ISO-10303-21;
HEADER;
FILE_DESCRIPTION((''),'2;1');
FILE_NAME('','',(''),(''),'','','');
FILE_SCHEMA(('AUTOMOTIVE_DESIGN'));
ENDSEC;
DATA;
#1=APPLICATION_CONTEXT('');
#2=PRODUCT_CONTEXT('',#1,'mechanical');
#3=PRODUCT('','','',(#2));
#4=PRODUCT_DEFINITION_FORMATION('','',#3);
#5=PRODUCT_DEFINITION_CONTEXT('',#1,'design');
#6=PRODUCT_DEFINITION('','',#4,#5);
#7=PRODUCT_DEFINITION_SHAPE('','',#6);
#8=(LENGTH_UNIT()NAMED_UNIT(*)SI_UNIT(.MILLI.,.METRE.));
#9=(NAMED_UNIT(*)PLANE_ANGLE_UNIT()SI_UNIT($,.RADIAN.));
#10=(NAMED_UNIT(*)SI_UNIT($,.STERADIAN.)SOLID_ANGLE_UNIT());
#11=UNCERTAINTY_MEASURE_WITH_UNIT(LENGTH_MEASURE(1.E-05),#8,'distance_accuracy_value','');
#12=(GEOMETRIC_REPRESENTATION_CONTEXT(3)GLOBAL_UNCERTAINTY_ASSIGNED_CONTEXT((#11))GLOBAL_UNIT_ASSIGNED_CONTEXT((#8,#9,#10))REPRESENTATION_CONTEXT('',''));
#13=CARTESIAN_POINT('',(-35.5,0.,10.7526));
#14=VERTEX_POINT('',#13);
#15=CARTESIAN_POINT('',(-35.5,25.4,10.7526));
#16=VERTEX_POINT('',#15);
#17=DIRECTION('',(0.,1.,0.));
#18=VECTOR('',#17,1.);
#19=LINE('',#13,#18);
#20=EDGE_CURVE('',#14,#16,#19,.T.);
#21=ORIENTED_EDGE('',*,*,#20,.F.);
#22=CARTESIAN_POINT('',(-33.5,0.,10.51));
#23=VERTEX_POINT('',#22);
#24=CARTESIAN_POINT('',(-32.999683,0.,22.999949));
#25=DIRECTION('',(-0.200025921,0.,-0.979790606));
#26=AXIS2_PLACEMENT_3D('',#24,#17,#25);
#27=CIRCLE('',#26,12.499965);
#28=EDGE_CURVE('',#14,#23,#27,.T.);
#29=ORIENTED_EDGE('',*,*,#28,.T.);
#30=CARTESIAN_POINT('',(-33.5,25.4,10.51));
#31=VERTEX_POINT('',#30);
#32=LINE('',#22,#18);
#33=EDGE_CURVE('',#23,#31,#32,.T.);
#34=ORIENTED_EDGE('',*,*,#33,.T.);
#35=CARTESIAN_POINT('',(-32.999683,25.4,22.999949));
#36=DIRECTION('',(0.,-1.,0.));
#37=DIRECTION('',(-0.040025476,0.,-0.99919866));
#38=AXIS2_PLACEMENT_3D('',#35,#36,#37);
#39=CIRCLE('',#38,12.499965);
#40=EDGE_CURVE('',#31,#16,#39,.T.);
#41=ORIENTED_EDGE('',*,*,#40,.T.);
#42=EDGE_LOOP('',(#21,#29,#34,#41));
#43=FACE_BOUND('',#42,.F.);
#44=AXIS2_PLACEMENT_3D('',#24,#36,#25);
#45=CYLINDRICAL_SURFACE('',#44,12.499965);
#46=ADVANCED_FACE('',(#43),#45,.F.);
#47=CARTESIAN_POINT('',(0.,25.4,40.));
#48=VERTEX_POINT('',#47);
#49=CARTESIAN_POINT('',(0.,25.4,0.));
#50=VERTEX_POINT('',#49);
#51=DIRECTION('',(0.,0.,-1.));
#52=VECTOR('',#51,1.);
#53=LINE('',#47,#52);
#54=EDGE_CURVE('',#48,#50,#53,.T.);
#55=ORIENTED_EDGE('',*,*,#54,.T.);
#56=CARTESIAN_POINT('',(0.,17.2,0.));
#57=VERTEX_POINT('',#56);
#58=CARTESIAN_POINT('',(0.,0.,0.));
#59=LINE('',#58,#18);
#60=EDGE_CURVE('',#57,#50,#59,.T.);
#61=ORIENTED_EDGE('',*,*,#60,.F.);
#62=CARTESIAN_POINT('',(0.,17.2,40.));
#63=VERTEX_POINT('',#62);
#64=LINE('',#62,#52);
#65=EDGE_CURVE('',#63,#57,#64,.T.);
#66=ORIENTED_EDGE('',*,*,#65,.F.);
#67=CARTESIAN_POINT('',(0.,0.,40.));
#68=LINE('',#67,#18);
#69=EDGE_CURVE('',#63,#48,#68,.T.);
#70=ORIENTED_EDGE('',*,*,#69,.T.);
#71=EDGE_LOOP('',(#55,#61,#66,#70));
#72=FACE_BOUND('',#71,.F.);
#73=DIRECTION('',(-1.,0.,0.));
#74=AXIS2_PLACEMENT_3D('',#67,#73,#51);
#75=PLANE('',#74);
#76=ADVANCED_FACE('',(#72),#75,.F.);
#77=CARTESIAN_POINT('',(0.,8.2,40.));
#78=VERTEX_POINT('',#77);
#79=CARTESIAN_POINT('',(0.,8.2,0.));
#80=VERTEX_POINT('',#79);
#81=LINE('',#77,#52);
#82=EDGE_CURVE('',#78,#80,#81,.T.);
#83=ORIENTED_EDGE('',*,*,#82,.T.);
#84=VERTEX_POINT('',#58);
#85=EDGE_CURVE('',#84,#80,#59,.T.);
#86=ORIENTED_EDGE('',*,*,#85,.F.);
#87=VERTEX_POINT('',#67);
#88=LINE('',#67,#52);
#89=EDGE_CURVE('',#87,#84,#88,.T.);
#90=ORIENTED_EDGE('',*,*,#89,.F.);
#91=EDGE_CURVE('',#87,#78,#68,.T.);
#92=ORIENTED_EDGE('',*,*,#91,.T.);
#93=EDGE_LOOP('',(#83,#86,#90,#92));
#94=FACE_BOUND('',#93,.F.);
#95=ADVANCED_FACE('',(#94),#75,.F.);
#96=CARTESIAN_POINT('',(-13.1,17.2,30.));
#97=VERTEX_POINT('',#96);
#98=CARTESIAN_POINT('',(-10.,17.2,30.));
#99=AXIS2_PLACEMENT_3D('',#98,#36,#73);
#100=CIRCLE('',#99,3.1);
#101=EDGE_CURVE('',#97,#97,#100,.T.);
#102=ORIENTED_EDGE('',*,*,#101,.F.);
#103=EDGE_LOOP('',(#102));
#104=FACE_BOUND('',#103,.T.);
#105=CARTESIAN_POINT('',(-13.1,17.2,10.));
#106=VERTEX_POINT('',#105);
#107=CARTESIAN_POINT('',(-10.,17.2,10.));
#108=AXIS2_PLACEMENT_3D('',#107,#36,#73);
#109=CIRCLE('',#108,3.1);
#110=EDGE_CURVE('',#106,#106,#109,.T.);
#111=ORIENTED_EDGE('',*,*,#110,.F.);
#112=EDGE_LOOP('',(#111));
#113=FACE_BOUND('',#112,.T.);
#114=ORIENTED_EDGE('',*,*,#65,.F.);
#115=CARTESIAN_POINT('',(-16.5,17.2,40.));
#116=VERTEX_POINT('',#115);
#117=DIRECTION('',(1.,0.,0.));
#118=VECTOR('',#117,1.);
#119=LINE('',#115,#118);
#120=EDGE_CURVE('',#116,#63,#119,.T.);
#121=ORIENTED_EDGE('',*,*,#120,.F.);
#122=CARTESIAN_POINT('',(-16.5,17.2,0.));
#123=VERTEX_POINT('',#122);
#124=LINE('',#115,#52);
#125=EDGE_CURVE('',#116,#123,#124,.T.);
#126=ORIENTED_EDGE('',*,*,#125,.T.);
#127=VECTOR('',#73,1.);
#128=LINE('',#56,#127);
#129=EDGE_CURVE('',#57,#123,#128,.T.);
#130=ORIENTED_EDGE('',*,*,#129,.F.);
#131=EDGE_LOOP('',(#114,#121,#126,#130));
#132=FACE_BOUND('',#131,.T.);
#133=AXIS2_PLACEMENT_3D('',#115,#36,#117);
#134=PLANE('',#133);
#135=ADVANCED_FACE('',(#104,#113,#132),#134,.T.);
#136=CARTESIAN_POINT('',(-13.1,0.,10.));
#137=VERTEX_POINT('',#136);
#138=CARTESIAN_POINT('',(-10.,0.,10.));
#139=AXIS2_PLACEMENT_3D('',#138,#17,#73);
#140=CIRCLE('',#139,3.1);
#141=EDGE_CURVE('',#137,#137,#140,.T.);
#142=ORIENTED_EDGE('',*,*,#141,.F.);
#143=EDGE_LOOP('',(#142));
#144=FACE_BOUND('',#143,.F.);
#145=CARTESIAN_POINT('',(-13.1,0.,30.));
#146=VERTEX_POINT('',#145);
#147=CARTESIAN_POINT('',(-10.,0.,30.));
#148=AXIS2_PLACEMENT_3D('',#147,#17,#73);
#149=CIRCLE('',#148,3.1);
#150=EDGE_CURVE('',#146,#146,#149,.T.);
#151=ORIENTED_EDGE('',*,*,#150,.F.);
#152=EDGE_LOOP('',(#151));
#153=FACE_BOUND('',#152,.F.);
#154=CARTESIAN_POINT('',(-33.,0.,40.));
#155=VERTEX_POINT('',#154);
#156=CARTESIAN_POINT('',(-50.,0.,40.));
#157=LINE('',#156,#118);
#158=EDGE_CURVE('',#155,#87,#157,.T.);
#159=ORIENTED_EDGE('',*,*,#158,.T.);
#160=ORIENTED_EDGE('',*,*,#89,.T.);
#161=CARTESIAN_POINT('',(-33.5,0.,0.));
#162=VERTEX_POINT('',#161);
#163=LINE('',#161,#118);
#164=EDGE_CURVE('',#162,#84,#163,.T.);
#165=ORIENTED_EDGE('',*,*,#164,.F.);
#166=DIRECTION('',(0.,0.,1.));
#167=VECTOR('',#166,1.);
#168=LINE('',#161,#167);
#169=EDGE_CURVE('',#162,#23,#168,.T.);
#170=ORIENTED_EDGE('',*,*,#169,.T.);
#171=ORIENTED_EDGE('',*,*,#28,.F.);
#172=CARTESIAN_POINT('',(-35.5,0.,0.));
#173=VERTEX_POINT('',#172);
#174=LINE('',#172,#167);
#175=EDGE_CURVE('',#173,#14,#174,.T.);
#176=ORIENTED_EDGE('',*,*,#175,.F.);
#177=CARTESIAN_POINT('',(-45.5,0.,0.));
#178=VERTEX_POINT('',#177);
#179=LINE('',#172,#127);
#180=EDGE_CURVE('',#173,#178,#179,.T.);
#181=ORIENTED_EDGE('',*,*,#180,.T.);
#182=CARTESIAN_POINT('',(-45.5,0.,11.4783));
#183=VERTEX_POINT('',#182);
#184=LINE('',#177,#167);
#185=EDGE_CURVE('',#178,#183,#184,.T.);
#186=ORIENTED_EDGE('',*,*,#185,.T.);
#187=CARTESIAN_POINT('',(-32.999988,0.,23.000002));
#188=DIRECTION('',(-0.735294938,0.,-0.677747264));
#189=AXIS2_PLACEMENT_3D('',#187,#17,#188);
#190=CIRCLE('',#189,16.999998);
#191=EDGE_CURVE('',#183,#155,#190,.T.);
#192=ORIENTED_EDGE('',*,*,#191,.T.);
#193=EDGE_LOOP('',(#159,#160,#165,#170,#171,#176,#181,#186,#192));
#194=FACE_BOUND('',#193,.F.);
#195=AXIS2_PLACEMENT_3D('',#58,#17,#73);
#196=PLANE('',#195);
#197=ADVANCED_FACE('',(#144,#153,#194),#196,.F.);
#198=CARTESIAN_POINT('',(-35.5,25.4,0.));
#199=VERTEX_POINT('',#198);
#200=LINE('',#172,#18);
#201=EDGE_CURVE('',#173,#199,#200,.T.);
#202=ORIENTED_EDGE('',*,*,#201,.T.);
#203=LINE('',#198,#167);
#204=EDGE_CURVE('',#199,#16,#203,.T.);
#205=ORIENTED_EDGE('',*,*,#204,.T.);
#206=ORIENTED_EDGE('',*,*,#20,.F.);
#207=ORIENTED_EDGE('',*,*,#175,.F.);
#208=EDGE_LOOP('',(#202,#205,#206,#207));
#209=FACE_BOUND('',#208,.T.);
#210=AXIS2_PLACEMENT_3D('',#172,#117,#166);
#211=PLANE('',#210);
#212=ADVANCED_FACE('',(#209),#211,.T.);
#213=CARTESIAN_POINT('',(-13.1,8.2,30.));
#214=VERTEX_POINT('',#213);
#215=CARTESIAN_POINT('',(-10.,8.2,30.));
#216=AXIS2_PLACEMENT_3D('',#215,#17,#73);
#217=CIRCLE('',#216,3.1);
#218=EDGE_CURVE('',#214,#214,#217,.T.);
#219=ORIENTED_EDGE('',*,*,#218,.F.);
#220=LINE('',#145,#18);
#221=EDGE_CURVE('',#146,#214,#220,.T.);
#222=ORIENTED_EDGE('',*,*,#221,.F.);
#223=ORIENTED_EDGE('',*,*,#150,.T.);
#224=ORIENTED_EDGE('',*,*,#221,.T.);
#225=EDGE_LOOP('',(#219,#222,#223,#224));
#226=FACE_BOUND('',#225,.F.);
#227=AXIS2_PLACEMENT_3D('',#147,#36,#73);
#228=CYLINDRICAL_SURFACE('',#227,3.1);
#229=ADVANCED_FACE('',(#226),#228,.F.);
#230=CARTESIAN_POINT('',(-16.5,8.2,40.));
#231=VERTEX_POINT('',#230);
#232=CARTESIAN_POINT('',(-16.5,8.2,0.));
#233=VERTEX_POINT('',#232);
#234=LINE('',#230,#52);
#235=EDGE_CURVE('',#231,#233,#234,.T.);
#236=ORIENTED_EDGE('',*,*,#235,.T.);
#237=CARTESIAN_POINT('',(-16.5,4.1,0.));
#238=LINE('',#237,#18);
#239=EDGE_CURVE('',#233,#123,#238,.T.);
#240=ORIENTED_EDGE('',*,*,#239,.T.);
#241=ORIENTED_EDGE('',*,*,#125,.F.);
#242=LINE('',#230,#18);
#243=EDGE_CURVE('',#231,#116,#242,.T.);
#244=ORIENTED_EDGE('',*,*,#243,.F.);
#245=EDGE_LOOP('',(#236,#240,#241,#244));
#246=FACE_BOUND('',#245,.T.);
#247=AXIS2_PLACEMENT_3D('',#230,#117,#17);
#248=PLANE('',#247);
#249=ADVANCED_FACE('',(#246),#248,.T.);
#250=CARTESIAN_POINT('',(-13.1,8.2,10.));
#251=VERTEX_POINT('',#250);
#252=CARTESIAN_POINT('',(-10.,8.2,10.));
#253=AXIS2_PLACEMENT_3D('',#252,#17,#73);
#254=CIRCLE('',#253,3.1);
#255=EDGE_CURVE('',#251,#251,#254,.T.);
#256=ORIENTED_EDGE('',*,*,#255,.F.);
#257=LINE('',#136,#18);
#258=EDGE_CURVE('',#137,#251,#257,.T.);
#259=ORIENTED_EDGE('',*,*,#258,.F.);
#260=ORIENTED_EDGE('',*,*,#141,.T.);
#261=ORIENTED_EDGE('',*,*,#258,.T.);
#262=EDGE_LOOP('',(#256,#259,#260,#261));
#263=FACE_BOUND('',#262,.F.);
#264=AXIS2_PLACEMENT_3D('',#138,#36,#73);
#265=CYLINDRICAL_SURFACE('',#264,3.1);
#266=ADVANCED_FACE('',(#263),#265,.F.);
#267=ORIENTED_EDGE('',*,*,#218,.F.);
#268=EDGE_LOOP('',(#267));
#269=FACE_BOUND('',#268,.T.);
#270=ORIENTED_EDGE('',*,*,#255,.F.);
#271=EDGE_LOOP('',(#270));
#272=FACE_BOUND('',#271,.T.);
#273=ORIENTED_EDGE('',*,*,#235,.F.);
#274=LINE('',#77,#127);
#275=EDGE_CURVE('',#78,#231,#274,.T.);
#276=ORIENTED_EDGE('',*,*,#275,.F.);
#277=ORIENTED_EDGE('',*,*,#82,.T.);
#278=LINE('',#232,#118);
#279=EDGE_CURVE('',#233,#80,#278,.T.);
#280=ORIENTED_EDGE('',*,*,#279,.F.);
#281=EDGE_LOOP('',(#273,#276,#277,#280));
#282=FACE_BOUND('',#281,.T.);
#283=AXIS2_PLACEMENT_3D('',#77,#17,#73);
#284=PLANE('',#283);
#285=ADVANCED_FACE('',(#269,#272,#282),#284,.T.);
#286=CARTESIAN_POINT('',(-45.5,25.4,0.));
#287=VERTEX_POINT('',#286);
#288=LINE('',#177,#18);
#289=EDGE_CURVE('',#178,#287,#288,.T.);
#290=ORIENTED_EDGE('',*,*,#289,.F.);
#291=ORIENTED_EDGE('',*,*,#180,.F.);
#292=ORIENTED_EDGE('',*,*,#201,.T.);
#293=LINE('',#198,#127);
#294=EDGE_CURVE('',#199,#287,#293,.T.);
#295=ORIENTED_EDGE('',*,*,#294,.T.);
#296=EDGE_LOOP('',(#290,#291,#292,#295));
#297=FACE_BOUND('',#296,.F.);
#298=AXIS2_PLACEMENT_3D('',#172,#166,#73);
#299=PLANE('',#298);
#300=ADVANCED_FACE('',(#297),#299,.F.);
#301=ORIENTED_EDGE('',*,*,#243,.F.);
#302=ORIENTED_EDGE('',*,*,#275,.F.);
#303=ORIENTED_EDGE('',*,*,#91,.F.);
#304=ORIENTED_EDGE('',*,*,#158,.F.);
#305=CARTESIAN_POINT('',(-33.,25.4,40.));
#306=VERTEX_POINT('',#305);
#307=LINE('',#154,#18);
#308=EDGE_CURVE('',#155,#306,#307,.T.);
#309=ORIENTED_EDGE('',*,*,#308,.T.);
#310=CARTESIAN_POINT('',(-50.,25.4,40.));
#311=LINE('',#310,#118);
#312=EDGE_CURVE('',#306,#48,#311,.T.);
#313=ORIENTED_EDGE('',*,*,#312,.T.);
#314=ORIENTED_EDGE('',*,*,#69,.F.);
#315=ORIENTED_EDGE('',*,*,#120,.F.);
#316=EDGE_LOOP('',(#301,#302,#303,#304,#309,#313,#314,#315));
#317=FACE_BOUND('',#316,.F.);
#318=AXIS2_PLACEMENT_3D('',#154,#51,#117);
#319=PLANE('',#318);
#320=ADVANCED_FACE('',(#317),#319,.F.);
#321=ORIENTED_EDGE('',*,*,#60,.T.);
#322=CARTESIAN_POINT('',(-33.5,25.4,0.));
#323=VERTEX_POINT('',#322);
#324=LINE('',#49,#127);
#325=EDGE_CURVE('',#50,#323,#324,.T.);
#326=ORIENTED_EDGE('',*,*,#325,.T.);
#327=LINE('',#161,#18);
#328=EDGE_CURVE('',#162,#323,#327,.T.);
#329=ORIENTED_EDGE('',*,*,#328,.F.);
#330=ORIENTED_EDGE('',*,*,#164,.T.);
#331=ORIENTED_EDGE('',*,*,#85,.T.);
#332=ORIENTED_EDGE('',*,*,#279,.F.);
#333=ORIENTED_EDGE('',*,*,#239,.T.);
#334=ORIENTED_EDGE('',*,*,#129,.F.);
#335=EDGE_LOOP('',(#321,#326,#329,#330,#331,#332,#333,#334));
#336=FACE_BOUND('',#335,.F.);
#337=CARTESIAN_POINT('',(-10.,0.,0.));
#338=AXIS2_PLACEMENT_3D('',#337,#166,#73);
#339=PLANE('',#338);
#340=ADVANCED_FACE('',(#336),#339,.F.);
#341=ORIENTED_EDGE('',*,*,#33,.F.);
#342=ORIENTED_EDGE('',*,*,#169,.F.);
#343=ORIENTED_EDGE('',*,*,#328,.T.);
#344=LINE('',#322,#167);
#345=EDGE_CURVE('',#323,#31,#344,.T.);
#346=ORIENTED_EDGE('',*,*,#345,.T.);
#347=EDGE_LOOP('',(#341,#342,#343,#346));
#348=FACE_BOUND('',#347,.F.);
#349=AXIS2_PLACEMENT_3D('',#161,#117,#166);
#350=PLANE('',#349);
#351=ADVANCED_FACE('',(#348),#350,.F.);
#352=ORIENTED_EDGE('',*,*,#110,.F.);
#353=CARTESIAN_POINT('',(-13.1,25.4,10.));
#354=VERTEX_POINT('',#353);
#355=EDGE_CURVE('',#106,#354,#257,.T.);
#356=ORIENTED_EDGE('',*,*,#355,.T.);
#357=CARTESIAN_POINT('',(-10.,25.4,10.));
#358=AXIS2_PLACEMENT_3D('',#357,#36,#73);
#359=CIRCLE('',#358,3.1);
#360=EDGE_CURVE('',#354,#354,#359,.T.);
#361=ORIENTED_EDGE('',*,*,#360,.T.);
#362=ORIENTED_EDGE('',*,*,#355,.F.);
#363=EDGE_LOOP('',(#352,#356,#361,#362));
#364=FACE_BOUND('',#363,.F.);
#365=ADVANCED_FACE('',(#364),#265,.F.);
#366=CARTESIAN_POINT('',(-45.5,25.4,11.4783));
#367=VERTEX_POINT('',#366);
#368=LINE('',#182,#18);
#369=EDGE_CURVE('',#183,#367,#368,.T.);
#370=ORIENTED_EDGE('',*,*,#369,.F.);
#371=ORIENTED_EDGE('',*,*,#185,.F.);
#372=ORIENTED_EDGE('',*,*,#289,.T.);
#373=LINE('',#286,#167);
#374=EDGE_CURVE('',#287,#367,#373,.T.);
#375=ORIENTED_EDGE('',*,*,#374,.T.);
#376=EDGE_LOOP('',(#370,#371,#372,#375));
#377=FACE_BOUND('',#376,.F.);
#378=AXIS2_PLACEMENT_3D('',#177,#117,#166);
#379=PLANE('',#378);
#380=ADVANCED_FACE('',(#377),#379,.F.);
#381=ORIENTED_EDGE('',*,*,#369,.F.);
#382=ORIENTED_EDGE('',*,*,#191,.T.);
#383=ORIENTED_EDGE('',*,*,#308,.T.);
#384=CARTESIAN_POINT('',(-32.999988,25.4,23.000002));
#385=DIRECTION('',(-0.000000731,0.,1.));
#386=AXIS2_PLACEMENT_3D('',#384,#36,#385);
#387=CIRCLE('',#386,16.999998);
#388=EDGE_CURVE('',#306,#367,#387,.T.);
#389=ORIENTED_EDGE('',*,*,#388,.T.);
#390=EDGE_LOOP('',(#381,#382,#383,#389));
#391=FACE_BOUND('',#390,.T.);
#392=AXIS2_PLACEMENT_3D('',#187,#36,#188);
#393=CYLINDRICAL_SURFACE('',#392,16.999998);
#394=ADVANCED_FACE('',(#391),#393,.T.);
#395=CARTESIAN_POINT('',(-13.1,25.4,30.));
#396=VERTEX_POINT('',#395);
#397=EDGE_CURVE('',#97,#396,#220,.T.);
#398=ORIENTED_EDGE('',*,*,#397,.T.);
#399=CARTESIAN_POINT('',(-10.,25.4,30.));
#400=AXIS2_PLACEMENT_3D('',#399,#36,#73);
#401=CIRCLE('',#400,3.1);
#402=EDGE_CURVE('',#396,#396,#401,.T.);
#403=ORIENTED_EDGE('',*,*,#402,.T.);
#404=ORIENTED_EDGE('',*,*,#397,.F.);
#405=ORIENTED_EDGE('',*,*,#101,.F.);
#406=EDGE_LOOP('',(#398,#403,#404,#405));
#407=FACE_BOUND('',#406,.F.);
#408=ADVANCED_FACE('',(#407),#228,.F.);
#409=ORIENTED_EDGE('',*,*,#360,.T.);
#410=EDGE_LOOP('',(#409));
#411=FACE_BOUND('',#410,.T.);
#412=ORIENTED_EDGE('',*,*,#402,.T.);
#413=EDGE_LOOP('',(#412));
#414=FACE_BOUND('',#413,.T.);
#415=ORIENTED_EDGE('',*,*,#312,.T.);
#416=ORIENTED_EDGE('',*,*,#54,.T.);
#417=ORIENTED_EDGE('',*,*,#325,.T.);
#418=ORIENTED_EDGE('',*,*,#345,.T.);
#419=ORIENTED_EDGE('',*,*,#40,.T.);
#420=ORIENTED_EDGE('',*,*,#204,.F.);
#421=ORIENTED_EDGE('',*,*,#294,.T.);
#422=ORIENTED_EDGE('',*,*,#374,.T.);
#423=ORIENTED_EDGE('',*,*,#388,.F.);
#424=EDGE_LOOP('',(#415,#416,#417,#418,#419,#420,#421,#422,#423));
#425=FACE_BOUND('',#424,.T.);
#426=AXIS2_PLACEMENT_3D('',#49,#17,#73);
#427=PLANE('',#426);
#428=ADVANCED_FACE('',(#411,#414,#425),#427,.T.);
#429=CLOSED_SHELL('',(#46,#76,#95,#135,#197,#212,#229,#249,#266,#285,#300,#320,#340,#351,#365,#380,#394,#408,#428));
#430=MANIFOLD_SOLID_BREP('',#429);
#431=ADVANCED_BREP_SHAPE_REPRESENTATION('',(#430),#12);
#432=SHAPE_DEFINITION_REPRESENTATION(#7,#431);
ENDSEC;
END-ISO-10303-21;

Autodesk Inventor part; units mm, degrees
ref_plane "YZ Plane" through (0, 0, 0) normal (1, 0, 0) x (0, 1, 0)
ref_plane "XZ Plane" through (0, 0, 0) normal (0, 1, 0) x (-1, 0, 0)
ref_plane "XY Plane" through (0, 0, 0) normal (0, 0, 1) x (1, 0, 0)
sketch "Sketch1" plane through (0, 0, 0) normal (0, 1, 0) x (-1, 0, 0)
  line L0 (50, 0) -> (50, 40)
  line L1 (50, 40) -> (0, 40)
  line L2 (0, 40) -> (0, 0)
  line L3 (0, 0) -> (10, 0)
  line L4 (10, 0) -> (10, 10)
  line L5 (10, 10) -> (10, 30)
  circle A0 centre (10, 30) radius 3.1
  circle A1 centre (10, 10) radius 3.1
  line L6 (45.5, 0) -> (45.5, 11.4783)
  line L7 (0, 0) -> (33.5, 0)
  line L8 (35.5, 0) -> (35.5, 10.7526)
  line L9 (50, 40) -> (45.5, 40)
  line L10 (45.5, 40) -> (45.5, 35.5)
  line L11 (45.5, 35.5) -> (45.5, 34.5217)
  line L12 (45.5, 23) -> (33, 23)
  arc A2 (35.5, 10.7526) -> (33.5, 10.51) centre (33, 23) ccw
  arc A3 (45.5, 11.4783) -> (33, 40) centre (33, 23) ccw
  line L13 (0, 0) -> (33.5, 0)
  line L14 (35.5, 0) -> (45.5, 0)
  line L15 (33.5, 0) -> (33.5, 10.51)
  line L16 (0, 0) -> (33.5, 0)
  line L17 (35.5, 0) -> (45.5, 0)
  dimension "d0" = 50
  dimension "d1" = 40
  dimension "d2" = 10
  dimension "d3" = 10
  dimension "d4" = 20
  dimension "d5" = 6.2
  dimension "d6" = 6.2
  dimension "d7" = 45.5
  dimension "d8" = 35.5
  dimension "d9" = 4.5
  dimension "d10" = 4.5
  dimension "d11" = 12.5
  dimension "d12" = 12.5
  dimension "d13" = 2
extrude "Extrusion1" add sketch "Sketch1" along normal blind 25.4 contours A3 L6 L14 L8 A2 L15 L7 L3 L2 L1
sketch "Sketch2" plane through (-33, 0, 40) normal (0, 0, 1) x (1, 0, 0)
  line L0 (33, 0) -> (33, 8.2)
  line L1 (33, 0) -> (33, 25.4)
  line L2 (33, 8.2) -> (16.5, 8.2)
  line L3 (16.5, 8.2) -> (16.5, 17.2)
  line L4 (16.5, 17.2) -> (33, 17.2)
  line L5 (33, 17.2) -> (33, 8.2)
  dimension "d16" = 8.2
  dimension "d17" = 16.5
  dimension "d18" = 9
extrude "Extrusion2" cut sketch "Sketch2" against normal through all
properties part number "suporte-eixo-new" material "Steel, Carbon"
